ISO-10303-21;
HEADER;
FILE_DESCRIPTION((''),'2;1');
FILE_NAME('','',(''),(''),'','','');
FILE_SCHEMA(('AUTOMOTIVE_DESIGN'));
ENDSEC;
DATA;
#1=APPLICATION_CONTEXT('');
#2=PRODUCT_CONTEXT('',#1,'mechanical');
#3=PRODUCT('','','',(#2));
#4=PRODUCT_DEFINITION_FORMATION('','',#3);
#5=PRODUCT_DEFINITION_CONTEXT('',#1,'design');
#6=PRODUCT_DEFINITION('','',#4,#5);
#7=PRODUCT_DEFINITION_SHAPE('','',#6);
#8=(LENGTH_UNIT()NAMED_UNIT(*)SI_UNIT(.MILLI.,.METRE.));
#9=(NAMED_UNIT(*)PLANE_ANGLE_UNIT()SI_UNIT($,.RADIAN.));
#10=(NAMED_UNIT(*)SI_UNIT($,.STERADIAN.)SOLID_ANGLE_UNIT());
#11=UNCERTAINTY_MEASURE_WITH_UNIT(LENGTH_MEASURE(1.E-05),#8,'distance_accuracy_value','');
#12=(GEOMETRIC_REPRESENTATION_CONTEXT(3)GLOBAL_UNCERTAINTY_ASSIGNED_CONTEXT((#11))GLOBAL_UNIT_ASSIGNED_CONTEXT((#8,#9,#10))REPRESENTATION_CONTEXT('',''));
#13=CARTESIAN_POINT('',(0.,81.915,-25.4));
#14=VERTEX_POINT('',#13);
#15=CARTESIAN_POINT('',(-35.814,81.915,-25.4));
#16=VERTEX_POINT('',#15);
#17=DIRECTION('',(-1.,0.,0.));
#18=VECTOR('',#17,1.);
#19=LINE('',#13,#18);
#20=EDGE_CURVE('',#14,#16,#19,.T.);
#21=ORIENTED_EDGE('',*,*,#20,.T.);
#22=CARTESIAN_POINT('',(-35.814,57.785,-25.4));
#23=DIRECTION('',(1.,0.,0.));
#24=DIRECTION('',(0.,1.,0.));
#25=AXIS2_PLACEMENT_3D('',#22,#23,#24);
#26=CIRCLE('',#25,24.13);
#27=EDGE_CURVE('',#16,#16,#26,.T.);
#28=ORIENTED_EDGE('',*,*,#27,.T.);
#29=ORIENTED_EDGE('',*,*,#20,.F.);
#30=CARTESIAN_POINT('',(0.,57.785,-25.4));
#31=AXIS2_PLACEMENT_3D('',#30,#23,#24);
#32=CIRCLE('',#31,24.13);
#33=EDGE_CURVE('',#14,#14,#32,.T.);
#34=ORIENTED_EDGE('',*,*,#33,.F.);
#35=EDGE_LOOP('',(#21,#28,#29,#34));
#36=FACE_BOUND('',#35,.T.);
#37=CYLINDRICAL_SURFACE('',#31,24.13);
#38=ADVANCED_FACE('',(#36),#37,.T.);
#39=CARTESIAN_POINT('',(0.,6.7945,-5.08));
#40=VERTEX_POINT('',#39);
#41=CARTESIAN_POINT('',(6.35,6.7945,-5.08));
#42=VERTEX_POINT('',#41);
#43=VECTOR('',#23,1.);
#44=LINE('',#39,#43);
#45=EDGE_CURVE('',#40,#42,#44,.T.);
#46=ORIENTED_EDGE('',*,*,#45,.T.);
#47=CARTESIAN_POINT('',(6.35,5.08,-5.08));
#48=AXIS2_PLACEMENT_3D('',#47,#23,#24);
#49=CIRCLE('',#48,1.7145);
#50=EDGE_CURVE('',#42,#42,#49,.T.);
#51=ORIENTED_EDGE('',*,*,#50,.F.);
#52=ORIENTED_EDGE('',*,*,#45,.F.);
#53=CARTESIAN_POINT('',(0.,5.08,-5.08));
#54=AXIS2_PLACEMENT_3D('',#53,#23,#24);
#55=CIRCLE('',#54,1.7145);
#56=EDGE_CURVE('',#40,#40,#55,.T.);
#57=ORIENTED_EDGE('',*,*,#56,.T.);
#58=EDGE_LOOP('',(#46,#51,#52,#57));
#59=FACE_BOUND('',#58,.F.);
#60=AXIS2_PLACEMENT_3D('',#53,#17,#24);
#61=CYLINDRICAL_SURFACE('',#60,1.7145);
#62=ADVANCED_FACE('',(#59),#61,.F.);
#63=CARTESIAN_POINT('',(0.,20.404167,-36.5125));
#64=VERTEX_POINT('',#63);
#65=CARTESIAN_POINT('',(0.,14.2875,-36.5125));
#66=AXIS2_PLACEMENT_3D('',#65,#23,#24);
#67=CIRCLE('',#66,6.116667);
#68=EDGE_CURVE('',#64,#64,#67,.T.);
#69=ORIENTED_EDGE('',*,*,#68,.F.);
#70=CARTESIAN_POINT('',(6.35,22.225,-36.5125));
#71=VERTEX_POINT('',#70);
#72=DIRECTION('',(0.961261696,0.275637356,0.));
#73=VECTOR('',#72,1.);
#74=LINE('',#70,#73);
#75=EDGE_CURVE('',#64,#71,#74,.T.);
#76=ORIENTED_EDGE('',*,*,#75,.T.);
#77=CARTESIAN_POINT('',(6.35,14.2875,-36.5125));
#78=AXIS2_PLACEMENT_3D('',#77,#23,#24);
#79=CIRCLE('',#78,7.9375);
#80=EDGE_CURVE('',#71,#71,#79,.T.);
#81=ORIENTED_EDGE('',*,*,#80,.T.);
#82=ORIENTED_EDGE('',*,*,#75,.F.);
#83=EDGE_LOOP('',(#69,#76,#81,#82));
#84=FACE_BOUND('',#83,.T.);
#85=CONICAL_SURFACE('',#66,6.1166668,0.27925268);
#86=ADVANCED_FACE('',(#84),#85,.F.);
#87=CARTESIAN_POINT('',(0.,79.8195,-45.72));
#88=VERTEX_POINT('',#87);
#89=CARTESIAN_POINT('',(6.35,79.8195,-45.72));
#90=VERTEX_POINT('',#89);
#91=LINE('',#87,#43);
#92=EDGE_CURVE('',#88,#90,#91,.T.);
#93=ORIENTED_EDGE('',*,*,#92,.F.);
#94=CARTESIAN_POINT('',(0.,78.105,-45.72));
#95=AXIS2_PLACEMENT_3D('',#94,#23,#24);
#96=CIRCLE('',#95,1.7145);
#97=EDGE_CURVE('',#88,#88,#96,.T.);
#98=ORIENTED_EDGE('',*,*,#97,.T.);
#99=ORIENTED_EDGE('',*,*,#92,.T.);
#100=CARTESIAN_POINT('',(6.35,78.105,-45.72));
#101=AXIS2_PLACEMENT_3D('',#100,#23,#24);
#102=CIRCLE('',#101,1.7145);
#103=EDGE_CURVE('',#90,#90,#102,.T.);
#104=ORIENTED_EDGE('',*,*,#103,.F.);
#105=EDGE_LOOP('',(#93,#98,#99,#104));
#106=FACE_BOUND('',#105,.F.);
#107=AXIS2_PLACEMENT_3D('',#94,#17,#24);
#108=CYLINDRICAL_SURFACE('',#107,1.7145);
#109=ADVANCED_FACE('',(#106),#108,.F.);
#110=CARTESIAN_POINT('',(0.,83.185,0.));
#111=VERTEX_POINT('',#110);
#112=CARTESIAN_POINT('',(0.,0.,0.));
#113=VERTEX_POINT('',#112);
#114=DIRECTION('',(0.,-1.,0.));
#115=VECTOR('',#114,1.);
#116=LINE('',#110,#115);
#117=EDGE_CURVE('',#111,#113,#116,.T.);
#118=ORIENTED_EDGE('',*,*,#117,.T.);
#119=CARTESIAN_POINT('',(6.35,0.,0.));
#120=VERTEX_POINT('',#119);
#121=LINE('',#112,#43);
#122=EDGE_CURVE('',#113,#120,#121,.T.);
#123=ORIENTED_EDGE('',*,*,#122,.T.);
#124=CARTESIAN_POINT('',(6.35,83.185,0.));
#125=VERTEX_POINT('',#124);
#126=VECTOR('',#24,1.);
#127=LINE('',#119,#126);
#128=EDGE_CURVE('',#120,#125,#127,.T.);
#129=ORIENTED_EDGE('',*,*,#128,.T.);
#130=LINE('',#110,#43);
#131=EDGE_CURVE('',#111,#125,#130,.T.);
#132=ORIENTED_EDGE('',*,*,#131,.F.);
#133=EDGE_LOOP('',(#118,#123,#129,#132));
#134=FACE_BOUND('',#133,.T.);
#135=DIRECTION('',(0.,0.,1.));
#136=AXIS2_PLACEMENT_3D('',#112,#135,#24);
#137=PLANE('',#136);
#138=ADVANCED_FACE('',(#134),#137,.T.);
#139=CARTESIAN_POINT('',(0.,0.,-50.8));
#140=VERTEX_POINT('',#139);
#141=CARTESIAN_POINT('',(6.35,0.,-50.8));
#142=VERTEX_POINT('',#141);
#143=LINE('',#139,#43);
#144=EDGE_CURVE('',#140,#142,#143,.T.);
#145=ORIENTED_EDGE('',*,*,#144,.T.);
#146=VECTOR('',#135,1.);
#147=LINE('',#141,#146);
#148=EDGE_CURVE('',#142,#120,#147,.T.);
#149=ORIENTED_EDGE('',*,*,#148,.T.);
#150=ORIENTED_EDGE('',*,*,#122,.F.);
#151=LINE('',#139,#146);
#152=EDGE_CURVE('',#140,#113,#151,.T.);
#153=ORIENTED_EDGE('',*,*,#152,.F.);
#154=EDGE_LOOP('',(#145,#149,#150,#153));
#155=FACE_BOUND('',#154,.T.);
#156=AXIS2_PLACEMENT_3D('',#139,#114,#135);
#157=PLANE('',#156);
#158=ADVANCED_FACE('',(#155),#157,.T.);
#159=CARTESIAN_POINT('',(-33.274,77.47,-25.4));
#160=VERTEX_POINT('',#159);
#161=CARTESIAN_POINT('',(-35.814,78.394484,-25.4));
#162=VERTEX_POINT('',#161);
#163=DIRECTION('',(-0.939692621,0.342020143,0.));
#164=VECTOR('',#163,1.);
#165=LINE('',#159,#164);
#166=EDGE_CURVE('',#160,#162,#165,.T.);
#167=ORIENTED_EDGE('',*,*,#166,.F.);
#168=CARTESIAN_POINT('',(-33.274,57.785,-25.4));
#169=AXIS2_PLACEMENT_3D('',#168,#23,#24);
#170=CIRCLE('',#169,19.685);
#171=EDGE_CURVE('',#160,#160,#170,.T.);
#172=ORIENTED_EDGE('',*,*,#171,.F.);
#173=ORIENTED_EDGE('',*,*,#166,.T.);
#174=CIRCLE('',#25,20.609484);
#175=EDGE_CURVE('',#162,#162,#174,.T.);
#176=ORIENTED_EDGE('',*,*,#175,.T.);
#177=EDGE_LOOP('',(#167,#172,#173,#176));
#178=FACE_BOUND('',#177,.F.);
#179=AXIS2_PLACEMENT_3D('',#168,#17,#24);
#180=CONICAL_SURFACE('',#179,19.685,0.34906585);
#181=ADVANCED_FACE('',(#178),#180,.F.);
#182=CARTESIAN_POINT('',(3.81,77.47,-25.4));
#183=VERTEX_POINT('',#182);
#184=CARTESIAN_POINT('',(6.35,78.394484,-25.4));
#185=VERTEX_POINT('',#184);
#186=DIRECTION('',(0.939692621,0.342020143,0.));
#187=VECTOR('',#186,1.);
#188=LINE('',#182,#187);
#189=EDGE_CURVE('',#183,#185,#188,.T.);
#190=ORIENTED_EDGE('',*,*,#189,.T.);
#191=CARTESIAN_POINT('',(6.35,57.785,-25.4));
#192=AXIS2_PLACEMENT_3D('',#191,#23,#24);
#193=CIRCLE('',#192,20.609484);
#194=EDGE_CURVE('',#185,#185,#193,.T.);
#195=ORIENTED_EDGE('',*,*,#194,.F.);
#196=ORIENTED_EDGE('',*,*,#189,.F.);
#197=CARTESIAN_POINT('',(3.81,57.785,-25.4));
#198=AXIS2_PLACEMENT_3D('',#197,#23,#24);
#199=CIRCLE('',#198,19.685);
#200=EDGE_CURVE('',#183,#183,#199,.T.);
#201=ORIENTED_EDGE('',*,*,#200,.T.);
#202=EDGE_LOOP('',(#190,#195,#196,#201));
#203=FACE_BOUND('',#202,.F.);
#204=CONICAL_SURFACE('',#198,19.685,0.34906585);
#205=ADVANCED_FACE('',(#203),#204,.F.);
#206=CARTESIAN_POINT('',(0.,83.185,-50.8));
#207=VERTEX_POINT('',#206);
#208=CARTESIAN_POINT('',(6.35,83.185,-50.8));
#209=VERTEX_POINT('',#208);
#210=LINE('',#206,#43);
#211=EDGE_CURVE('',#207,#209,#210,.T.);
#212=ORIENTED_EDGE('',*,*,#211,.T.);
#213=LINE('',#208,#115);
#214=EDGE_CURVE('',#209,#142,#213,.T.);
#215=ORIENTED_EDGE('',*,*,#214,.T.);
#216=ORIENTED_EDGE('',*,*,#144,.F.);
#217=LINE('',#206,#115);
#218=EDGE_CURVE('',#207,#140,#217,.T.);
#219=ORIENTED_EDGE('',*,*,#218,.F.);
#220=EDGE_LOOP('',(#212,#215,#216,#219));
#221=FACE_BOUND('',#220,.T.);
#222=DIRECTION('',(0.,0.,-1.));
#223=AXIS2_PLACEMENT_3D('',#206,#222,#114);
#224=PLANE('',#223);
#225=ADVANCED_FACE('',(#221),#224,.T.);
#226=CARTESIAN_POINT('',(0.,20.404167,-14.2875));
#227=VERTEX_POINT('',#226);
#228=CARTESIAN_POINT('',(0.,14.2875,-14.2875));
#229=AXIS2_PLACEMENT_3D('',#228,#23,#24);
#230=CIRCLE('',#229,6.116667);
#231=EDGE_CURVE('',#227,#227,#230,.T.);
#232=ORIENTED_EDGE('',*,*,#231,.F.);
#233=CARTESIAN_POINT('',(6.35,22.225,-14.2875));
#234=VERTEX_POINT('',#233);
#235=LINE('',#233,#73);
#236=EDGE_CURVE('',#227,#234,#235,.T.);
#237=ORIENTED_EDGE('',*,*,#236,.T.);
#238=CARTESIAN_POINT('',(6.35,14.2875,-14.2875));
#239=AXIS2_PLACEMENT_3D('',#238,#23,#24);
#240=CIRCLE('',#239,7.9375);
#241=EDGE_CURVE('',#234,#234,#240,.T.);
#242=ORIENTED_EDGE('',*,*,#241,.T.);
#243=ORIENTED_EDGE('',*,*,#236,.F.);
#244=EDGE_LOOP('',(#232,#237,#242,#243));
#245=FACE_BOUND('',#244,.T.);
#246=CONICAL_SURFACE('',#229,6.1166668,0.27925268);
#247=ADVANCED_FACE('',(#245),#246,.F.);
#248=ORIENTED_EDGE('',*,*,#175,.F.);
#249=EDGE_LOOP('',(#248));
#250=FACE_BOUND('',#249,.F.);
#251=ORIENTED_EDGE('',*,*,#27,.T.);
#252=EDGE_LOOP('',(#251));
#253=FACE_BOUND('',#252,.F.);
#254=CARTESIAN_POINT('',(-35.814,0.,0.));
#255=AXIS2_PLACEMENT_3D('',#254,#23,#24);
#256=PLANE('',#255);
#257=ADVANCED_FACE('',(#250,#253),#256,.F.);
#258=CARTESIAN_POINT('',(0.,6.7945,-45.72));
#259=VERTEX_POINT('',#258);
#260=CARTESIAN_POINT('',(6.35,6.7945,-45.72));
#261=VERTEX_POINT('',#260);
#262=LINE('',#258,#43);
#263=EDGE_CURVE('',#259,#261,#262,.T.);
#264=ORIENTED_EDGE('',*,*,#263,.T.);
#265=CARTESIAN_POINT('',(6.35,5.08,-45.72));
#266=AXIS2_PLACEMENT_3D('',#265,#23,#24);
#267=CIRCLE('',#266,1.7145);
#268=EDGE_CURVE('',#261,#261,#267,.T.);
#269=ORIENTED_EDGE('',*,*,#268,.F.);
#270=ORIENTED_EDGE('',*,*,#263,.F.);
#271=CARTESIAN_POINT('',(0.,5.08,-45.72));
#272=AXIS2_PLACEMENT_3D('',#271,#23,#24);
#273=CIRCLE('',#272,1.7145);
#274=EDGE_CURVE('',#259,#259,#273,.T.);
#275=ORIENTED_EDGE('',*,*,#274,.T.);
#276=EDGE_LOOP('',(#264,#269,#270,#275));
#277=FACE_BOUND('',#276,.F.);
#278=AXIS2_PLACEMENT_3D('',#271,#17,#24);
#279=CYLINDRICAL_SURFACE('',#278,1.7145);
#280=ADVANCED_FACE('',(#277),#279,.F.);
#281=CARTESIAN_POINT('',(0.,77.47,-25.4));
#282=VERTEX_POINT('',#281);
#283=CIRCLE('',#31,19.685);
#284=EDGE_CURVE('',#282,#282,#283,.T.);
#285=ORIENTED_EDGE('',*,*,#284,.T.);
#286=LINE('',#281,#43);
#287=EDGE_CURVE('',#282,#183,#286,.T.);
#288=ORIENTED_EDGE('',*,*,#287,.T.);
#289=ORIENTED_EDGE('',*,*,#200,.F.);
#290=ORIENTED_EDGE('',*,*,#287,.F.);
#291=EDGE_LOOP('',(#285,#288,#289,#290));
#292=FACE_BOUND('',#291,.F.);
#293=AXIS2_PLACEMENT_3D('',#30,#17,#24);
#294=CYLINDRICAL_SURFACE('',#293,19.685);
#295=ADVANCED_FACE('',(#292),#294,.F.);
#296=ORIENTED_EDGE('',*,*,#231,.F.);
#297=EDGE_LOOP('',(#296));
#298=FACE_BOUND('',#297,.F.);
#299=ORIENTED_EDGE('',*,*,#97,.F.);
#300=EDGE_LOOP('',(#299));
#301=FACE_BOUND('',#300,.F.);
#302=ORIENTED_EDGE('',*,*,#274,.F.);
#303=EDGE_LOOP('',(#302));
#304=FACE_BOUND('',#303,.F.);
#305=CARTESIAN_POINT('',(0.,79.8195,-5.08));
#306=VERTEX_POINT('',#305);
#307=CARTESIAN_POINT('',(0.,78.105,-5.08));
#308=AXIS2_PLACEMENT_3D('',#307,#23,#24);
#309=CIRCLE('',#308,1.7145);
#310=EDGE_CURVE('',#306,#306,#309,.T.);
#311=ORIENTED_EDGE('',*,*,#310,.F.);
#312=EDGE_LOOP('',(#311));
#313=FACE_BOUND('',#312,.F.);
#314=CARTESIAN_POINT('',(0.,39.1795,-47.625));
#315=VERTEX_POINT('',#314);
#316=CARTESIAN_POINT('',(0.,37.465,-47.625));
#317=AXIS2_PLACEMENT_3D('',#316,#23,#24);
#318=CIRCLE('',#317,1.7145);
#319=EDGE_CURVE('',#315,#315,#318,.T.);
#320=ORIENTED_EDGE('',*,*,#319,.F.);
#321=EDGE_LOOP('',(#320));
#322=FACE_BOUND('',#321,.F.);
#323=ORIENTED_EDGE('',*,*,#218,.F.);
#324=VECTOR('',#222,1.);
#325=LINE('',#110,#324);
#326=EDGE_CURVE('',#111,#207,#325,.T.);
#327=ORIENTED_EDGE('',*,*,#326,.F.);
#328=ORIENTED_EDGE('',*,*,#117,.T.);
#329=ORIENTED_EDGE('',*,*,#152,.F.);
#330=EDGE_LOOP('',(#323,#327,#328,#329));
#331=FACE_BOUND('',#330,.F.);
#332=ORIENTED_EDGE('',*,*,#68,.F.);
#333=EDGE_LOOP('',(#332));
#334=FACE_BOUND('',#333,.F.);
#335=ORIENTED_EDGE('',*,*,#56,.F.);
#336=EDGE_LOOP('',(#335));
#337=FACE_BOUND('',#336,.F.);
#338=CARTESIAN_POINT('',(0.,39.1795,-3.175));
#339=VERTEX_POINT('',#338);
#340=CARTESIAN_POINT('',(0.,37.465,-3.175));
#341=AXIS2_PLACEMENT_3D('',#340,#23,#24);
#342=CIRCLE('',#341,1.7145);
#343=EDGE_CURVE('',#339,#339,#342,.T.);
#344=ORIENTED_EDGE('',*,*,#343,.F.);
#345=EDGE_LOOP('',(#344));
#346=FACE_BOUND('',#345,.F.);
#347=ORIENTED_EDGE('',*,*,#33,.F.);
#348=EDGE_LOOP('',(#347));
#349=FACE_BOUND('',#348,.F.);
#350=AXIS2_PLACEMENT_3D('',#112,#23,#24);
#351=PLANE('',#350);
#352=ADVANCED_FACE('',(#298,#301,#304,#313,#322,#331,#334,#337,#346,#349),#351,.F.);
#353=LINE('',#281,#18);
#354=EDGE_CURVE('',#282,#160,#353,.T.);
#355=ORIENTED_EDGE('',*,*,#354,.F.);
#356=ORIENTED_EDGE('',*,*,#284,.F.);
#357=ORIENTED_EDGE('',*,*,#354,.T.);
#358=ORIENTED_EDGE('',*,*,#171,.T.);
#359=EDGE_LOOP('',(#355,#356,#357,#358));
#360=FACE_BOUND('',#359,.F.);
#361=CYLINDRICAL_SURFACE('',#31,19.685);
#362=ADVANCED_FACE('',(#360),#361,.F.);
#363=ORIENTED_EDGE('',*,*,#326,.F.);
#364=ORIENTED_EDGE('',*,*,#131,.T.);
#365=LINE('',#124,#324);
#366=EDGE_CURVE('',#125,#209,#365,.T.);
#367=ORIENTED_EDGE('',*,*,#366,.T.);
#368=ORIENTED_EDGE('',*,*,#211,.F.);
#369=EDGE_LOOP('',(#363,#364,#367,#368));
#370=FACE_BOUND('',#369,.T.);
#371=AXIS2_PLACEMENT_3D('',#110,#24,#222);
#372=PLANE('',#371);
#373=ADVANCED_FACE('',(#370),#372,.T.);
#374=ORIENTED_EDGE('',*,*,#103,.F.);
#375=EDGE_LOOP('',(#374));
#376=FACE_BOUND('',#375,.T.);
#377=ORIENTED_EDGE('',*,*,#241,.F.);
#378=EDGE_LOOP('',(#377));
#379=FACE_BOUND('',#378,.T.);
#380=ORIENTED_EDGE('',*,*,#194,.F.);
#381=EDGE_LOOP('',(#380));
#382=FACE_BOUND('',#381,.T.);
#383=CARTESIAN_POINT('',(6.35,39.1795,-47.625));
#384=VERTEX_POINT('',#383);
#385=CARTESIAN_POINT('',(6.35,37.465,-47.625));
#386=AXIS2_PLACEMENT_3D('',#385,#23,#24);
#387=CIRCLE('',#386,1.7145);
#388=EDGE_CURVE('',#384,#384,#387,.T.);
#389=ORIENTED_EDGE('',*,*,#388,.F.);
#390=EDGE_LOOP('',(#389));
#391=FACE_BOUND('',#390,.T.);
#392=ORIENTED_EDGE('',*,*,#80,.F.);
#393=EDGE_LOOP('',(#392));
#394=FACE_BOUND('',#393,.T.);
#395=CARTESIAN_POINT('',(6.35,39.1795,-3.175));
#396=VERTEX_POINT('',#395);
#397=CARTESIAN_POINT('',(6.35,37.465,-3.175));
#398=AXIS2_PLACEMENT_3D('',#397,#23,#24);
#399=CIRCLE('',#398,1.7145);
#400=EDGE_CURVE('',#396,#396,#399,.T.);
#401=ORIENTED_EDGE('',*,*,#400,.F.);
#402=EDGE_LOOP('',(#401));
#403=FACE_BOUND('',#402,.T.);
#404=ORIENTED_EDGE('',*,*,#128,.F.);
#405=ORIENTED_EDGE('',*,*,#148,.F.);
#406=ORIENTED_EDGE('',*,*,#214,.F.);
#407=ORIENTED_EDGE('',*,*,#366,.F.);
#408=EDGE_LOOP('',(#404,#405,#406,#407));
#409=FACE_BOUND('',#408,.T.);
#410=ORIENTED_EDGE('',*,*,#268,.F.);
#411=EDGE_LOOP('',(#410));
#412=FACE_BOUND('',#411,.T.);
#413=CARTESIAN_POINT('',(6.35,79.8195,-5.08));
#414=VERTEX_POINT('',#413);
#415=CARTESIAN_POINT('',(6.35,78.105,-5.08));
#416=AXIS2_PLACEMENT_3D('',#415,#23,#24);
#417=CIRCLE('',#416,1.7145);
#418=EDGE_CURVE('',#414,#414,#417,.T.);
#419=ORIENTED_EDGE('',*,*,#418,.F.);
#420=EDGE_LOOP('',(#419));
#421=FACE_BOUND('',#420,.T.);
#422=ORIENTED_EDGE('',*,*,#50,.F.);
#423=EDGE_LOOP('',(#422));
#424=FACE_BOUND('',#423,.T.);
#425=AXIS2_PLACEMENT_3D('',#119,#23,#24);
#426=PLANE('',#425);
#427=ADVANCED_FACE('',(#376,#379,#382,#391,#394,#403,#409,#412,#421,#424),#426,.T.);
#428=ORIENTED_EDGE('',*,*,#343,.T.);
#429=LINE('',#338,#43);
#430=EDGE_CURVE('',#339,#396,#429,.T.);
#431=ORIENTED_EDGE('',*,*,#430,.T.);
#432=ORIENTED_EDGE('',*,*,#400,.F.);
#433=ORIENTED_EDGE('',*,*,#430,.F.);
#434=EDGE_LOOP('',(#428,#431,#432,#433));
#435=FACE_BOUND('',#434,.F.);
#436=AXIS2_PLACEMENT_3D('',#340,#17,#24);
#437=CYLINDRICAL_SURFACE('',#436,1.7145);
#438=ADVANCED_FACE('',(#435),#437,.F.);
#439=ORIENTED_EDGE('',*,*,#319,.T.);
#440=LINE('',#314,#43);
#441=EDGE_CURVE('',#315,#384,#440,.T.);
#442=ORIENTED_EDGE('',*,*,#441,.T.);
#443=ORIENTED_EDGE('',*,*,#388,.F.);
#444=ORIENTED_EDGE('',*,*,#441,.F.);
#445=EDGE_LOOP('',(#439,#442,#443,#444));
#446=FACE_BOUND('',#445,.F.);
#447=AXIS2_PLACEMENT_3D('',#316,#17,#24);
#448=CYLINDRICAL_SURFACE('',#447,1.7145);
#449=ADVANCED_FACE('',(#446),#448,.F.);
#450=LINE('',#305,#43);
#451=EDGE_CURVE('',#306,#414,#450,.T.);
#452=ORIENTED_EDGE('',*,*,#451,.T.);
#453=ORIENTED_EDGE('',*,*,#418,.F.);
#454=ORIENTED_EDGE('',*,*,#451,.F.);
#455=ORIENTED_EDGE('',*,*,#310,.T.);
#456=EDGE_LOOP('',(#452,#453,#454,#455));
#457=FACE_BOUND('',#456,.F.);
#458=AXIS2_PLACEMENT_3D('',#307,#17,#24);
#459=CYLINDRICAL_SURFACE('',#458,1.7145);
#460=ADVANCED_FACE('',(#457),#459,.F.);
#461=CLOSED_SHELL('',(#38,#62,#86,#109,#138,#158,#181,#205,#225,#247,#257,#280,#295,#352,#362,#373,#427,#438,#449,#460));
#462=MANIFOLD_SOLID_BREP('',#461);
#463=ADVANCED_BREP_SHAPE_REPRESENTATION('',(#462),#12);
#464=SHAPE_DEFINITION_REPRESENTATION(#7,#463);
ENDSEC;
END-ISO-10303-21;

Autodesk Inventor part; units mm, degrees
ref_plane "YZ Plane" through (0, 0, 0) normal (1, 0, 0) x (0, 1, 0)
ref_plane "XZ Plane" through (0, 0, 0) normal (0, 1, 0) x (-1, 0, 0)
ref_plane "XY Plane" through (0, 0, 0) normal (0, 0, 1) x (1, 0, 0)
sketch "Sketch1" plane through (0, 0, 0) normal (1, 0, 0) x (0, 1, 0)
  line L0 (0, 0) -> (83.185, 0)
  line L1 (83.185, 0) -> (83.185, -50.8)
  line L2 (83.185, -50.8) -> (0, -50.8)
  line L3 (0, -50.8) -> (0, 0)
  circle A0 centre (57.785, -25.4) radius 19.685
  circle A1 centre (14.2875, -14.2875) radius 7.9375
  circle A2 centre (14.2875, -36.5125) radius 7.9375
  circle A3 centre (5.08, -5.08) radius 1.7145
  circle A4 centre (5.08, -45.72) radius 1.7145
  circle A5 centre (78.105, -5.08) radius 1.7145
  circle A6 centre (78.105, -45.72) radius 1.7145
  line L4 (83.185, 0) -> (32.385, 0)
  circle A7 centre (37.465, -47.625) radius 1.7145
  circle A8 centre (37.465, -3.175) radius 1.7145
  circle A9 centre (57.785, -25.4) radius 24.13
  dimension "d0" = 83.185
  dimension "d1" = 50.8
  dimension "d2" = 39.37
  dimension "d3" = 25.4
  dimension "d4" = 25.4
  dimension "d5" = 15.875
  dimension "d6" = 15.875
  dimension "d7" = 14.2875
  dimension "d8" = 14.2875
  dimension "d9" = 14.2875
  dimension "d10" = 14.2875
  dimension "d16" = 3.429
  dimension "d17" = 5.08
  dimension "d18" = 5.08
  dimension "d19" = 50.8
  dimension "d20" = 3.429
  dimension "d21" = 3.175
  dimension "d23" = 48.26
  dimension "d32" = 5.08
  dimension "d33" = 5.08
  dimension "d34" = 3.175
  dimension "d35" = 5.08
  dimension "d36" = 5.08
  dimension "d37" = 5.08
  dimension "d38" = 5.08
extrude "Extrusion1" add sketch "Sketch1" along normal blind 6.35 contours L0 L1 L2 L3 | A9
draft "FaceDraft1" angle 16 pull direction (1, 0, 0) faces at (4.2333, 22.1993, -37.1512) (4.2333, 22.1993, -14.9262) fixed edges at (6.35, 6.35, -36.5125) (6.35, 6.35, -14.2875)
extrude "Extrusion2" add sketch "Sketch1" against normal blind 35.814 contours A9
chamfer "Chamfer1" distance 2.54 angle 20 1 edges at (6.35, 38.1, -25.4) measured on face at (-7.7047, 77.4062, -26.984)
chamfer "Chamfer2" distance 2.54 angle 20 1 edges at (-35.814, 38.1, -25.4) measured on face at (-9.398, 77.2151, -28.5577)
properties part number "Engine Head Bottom"
